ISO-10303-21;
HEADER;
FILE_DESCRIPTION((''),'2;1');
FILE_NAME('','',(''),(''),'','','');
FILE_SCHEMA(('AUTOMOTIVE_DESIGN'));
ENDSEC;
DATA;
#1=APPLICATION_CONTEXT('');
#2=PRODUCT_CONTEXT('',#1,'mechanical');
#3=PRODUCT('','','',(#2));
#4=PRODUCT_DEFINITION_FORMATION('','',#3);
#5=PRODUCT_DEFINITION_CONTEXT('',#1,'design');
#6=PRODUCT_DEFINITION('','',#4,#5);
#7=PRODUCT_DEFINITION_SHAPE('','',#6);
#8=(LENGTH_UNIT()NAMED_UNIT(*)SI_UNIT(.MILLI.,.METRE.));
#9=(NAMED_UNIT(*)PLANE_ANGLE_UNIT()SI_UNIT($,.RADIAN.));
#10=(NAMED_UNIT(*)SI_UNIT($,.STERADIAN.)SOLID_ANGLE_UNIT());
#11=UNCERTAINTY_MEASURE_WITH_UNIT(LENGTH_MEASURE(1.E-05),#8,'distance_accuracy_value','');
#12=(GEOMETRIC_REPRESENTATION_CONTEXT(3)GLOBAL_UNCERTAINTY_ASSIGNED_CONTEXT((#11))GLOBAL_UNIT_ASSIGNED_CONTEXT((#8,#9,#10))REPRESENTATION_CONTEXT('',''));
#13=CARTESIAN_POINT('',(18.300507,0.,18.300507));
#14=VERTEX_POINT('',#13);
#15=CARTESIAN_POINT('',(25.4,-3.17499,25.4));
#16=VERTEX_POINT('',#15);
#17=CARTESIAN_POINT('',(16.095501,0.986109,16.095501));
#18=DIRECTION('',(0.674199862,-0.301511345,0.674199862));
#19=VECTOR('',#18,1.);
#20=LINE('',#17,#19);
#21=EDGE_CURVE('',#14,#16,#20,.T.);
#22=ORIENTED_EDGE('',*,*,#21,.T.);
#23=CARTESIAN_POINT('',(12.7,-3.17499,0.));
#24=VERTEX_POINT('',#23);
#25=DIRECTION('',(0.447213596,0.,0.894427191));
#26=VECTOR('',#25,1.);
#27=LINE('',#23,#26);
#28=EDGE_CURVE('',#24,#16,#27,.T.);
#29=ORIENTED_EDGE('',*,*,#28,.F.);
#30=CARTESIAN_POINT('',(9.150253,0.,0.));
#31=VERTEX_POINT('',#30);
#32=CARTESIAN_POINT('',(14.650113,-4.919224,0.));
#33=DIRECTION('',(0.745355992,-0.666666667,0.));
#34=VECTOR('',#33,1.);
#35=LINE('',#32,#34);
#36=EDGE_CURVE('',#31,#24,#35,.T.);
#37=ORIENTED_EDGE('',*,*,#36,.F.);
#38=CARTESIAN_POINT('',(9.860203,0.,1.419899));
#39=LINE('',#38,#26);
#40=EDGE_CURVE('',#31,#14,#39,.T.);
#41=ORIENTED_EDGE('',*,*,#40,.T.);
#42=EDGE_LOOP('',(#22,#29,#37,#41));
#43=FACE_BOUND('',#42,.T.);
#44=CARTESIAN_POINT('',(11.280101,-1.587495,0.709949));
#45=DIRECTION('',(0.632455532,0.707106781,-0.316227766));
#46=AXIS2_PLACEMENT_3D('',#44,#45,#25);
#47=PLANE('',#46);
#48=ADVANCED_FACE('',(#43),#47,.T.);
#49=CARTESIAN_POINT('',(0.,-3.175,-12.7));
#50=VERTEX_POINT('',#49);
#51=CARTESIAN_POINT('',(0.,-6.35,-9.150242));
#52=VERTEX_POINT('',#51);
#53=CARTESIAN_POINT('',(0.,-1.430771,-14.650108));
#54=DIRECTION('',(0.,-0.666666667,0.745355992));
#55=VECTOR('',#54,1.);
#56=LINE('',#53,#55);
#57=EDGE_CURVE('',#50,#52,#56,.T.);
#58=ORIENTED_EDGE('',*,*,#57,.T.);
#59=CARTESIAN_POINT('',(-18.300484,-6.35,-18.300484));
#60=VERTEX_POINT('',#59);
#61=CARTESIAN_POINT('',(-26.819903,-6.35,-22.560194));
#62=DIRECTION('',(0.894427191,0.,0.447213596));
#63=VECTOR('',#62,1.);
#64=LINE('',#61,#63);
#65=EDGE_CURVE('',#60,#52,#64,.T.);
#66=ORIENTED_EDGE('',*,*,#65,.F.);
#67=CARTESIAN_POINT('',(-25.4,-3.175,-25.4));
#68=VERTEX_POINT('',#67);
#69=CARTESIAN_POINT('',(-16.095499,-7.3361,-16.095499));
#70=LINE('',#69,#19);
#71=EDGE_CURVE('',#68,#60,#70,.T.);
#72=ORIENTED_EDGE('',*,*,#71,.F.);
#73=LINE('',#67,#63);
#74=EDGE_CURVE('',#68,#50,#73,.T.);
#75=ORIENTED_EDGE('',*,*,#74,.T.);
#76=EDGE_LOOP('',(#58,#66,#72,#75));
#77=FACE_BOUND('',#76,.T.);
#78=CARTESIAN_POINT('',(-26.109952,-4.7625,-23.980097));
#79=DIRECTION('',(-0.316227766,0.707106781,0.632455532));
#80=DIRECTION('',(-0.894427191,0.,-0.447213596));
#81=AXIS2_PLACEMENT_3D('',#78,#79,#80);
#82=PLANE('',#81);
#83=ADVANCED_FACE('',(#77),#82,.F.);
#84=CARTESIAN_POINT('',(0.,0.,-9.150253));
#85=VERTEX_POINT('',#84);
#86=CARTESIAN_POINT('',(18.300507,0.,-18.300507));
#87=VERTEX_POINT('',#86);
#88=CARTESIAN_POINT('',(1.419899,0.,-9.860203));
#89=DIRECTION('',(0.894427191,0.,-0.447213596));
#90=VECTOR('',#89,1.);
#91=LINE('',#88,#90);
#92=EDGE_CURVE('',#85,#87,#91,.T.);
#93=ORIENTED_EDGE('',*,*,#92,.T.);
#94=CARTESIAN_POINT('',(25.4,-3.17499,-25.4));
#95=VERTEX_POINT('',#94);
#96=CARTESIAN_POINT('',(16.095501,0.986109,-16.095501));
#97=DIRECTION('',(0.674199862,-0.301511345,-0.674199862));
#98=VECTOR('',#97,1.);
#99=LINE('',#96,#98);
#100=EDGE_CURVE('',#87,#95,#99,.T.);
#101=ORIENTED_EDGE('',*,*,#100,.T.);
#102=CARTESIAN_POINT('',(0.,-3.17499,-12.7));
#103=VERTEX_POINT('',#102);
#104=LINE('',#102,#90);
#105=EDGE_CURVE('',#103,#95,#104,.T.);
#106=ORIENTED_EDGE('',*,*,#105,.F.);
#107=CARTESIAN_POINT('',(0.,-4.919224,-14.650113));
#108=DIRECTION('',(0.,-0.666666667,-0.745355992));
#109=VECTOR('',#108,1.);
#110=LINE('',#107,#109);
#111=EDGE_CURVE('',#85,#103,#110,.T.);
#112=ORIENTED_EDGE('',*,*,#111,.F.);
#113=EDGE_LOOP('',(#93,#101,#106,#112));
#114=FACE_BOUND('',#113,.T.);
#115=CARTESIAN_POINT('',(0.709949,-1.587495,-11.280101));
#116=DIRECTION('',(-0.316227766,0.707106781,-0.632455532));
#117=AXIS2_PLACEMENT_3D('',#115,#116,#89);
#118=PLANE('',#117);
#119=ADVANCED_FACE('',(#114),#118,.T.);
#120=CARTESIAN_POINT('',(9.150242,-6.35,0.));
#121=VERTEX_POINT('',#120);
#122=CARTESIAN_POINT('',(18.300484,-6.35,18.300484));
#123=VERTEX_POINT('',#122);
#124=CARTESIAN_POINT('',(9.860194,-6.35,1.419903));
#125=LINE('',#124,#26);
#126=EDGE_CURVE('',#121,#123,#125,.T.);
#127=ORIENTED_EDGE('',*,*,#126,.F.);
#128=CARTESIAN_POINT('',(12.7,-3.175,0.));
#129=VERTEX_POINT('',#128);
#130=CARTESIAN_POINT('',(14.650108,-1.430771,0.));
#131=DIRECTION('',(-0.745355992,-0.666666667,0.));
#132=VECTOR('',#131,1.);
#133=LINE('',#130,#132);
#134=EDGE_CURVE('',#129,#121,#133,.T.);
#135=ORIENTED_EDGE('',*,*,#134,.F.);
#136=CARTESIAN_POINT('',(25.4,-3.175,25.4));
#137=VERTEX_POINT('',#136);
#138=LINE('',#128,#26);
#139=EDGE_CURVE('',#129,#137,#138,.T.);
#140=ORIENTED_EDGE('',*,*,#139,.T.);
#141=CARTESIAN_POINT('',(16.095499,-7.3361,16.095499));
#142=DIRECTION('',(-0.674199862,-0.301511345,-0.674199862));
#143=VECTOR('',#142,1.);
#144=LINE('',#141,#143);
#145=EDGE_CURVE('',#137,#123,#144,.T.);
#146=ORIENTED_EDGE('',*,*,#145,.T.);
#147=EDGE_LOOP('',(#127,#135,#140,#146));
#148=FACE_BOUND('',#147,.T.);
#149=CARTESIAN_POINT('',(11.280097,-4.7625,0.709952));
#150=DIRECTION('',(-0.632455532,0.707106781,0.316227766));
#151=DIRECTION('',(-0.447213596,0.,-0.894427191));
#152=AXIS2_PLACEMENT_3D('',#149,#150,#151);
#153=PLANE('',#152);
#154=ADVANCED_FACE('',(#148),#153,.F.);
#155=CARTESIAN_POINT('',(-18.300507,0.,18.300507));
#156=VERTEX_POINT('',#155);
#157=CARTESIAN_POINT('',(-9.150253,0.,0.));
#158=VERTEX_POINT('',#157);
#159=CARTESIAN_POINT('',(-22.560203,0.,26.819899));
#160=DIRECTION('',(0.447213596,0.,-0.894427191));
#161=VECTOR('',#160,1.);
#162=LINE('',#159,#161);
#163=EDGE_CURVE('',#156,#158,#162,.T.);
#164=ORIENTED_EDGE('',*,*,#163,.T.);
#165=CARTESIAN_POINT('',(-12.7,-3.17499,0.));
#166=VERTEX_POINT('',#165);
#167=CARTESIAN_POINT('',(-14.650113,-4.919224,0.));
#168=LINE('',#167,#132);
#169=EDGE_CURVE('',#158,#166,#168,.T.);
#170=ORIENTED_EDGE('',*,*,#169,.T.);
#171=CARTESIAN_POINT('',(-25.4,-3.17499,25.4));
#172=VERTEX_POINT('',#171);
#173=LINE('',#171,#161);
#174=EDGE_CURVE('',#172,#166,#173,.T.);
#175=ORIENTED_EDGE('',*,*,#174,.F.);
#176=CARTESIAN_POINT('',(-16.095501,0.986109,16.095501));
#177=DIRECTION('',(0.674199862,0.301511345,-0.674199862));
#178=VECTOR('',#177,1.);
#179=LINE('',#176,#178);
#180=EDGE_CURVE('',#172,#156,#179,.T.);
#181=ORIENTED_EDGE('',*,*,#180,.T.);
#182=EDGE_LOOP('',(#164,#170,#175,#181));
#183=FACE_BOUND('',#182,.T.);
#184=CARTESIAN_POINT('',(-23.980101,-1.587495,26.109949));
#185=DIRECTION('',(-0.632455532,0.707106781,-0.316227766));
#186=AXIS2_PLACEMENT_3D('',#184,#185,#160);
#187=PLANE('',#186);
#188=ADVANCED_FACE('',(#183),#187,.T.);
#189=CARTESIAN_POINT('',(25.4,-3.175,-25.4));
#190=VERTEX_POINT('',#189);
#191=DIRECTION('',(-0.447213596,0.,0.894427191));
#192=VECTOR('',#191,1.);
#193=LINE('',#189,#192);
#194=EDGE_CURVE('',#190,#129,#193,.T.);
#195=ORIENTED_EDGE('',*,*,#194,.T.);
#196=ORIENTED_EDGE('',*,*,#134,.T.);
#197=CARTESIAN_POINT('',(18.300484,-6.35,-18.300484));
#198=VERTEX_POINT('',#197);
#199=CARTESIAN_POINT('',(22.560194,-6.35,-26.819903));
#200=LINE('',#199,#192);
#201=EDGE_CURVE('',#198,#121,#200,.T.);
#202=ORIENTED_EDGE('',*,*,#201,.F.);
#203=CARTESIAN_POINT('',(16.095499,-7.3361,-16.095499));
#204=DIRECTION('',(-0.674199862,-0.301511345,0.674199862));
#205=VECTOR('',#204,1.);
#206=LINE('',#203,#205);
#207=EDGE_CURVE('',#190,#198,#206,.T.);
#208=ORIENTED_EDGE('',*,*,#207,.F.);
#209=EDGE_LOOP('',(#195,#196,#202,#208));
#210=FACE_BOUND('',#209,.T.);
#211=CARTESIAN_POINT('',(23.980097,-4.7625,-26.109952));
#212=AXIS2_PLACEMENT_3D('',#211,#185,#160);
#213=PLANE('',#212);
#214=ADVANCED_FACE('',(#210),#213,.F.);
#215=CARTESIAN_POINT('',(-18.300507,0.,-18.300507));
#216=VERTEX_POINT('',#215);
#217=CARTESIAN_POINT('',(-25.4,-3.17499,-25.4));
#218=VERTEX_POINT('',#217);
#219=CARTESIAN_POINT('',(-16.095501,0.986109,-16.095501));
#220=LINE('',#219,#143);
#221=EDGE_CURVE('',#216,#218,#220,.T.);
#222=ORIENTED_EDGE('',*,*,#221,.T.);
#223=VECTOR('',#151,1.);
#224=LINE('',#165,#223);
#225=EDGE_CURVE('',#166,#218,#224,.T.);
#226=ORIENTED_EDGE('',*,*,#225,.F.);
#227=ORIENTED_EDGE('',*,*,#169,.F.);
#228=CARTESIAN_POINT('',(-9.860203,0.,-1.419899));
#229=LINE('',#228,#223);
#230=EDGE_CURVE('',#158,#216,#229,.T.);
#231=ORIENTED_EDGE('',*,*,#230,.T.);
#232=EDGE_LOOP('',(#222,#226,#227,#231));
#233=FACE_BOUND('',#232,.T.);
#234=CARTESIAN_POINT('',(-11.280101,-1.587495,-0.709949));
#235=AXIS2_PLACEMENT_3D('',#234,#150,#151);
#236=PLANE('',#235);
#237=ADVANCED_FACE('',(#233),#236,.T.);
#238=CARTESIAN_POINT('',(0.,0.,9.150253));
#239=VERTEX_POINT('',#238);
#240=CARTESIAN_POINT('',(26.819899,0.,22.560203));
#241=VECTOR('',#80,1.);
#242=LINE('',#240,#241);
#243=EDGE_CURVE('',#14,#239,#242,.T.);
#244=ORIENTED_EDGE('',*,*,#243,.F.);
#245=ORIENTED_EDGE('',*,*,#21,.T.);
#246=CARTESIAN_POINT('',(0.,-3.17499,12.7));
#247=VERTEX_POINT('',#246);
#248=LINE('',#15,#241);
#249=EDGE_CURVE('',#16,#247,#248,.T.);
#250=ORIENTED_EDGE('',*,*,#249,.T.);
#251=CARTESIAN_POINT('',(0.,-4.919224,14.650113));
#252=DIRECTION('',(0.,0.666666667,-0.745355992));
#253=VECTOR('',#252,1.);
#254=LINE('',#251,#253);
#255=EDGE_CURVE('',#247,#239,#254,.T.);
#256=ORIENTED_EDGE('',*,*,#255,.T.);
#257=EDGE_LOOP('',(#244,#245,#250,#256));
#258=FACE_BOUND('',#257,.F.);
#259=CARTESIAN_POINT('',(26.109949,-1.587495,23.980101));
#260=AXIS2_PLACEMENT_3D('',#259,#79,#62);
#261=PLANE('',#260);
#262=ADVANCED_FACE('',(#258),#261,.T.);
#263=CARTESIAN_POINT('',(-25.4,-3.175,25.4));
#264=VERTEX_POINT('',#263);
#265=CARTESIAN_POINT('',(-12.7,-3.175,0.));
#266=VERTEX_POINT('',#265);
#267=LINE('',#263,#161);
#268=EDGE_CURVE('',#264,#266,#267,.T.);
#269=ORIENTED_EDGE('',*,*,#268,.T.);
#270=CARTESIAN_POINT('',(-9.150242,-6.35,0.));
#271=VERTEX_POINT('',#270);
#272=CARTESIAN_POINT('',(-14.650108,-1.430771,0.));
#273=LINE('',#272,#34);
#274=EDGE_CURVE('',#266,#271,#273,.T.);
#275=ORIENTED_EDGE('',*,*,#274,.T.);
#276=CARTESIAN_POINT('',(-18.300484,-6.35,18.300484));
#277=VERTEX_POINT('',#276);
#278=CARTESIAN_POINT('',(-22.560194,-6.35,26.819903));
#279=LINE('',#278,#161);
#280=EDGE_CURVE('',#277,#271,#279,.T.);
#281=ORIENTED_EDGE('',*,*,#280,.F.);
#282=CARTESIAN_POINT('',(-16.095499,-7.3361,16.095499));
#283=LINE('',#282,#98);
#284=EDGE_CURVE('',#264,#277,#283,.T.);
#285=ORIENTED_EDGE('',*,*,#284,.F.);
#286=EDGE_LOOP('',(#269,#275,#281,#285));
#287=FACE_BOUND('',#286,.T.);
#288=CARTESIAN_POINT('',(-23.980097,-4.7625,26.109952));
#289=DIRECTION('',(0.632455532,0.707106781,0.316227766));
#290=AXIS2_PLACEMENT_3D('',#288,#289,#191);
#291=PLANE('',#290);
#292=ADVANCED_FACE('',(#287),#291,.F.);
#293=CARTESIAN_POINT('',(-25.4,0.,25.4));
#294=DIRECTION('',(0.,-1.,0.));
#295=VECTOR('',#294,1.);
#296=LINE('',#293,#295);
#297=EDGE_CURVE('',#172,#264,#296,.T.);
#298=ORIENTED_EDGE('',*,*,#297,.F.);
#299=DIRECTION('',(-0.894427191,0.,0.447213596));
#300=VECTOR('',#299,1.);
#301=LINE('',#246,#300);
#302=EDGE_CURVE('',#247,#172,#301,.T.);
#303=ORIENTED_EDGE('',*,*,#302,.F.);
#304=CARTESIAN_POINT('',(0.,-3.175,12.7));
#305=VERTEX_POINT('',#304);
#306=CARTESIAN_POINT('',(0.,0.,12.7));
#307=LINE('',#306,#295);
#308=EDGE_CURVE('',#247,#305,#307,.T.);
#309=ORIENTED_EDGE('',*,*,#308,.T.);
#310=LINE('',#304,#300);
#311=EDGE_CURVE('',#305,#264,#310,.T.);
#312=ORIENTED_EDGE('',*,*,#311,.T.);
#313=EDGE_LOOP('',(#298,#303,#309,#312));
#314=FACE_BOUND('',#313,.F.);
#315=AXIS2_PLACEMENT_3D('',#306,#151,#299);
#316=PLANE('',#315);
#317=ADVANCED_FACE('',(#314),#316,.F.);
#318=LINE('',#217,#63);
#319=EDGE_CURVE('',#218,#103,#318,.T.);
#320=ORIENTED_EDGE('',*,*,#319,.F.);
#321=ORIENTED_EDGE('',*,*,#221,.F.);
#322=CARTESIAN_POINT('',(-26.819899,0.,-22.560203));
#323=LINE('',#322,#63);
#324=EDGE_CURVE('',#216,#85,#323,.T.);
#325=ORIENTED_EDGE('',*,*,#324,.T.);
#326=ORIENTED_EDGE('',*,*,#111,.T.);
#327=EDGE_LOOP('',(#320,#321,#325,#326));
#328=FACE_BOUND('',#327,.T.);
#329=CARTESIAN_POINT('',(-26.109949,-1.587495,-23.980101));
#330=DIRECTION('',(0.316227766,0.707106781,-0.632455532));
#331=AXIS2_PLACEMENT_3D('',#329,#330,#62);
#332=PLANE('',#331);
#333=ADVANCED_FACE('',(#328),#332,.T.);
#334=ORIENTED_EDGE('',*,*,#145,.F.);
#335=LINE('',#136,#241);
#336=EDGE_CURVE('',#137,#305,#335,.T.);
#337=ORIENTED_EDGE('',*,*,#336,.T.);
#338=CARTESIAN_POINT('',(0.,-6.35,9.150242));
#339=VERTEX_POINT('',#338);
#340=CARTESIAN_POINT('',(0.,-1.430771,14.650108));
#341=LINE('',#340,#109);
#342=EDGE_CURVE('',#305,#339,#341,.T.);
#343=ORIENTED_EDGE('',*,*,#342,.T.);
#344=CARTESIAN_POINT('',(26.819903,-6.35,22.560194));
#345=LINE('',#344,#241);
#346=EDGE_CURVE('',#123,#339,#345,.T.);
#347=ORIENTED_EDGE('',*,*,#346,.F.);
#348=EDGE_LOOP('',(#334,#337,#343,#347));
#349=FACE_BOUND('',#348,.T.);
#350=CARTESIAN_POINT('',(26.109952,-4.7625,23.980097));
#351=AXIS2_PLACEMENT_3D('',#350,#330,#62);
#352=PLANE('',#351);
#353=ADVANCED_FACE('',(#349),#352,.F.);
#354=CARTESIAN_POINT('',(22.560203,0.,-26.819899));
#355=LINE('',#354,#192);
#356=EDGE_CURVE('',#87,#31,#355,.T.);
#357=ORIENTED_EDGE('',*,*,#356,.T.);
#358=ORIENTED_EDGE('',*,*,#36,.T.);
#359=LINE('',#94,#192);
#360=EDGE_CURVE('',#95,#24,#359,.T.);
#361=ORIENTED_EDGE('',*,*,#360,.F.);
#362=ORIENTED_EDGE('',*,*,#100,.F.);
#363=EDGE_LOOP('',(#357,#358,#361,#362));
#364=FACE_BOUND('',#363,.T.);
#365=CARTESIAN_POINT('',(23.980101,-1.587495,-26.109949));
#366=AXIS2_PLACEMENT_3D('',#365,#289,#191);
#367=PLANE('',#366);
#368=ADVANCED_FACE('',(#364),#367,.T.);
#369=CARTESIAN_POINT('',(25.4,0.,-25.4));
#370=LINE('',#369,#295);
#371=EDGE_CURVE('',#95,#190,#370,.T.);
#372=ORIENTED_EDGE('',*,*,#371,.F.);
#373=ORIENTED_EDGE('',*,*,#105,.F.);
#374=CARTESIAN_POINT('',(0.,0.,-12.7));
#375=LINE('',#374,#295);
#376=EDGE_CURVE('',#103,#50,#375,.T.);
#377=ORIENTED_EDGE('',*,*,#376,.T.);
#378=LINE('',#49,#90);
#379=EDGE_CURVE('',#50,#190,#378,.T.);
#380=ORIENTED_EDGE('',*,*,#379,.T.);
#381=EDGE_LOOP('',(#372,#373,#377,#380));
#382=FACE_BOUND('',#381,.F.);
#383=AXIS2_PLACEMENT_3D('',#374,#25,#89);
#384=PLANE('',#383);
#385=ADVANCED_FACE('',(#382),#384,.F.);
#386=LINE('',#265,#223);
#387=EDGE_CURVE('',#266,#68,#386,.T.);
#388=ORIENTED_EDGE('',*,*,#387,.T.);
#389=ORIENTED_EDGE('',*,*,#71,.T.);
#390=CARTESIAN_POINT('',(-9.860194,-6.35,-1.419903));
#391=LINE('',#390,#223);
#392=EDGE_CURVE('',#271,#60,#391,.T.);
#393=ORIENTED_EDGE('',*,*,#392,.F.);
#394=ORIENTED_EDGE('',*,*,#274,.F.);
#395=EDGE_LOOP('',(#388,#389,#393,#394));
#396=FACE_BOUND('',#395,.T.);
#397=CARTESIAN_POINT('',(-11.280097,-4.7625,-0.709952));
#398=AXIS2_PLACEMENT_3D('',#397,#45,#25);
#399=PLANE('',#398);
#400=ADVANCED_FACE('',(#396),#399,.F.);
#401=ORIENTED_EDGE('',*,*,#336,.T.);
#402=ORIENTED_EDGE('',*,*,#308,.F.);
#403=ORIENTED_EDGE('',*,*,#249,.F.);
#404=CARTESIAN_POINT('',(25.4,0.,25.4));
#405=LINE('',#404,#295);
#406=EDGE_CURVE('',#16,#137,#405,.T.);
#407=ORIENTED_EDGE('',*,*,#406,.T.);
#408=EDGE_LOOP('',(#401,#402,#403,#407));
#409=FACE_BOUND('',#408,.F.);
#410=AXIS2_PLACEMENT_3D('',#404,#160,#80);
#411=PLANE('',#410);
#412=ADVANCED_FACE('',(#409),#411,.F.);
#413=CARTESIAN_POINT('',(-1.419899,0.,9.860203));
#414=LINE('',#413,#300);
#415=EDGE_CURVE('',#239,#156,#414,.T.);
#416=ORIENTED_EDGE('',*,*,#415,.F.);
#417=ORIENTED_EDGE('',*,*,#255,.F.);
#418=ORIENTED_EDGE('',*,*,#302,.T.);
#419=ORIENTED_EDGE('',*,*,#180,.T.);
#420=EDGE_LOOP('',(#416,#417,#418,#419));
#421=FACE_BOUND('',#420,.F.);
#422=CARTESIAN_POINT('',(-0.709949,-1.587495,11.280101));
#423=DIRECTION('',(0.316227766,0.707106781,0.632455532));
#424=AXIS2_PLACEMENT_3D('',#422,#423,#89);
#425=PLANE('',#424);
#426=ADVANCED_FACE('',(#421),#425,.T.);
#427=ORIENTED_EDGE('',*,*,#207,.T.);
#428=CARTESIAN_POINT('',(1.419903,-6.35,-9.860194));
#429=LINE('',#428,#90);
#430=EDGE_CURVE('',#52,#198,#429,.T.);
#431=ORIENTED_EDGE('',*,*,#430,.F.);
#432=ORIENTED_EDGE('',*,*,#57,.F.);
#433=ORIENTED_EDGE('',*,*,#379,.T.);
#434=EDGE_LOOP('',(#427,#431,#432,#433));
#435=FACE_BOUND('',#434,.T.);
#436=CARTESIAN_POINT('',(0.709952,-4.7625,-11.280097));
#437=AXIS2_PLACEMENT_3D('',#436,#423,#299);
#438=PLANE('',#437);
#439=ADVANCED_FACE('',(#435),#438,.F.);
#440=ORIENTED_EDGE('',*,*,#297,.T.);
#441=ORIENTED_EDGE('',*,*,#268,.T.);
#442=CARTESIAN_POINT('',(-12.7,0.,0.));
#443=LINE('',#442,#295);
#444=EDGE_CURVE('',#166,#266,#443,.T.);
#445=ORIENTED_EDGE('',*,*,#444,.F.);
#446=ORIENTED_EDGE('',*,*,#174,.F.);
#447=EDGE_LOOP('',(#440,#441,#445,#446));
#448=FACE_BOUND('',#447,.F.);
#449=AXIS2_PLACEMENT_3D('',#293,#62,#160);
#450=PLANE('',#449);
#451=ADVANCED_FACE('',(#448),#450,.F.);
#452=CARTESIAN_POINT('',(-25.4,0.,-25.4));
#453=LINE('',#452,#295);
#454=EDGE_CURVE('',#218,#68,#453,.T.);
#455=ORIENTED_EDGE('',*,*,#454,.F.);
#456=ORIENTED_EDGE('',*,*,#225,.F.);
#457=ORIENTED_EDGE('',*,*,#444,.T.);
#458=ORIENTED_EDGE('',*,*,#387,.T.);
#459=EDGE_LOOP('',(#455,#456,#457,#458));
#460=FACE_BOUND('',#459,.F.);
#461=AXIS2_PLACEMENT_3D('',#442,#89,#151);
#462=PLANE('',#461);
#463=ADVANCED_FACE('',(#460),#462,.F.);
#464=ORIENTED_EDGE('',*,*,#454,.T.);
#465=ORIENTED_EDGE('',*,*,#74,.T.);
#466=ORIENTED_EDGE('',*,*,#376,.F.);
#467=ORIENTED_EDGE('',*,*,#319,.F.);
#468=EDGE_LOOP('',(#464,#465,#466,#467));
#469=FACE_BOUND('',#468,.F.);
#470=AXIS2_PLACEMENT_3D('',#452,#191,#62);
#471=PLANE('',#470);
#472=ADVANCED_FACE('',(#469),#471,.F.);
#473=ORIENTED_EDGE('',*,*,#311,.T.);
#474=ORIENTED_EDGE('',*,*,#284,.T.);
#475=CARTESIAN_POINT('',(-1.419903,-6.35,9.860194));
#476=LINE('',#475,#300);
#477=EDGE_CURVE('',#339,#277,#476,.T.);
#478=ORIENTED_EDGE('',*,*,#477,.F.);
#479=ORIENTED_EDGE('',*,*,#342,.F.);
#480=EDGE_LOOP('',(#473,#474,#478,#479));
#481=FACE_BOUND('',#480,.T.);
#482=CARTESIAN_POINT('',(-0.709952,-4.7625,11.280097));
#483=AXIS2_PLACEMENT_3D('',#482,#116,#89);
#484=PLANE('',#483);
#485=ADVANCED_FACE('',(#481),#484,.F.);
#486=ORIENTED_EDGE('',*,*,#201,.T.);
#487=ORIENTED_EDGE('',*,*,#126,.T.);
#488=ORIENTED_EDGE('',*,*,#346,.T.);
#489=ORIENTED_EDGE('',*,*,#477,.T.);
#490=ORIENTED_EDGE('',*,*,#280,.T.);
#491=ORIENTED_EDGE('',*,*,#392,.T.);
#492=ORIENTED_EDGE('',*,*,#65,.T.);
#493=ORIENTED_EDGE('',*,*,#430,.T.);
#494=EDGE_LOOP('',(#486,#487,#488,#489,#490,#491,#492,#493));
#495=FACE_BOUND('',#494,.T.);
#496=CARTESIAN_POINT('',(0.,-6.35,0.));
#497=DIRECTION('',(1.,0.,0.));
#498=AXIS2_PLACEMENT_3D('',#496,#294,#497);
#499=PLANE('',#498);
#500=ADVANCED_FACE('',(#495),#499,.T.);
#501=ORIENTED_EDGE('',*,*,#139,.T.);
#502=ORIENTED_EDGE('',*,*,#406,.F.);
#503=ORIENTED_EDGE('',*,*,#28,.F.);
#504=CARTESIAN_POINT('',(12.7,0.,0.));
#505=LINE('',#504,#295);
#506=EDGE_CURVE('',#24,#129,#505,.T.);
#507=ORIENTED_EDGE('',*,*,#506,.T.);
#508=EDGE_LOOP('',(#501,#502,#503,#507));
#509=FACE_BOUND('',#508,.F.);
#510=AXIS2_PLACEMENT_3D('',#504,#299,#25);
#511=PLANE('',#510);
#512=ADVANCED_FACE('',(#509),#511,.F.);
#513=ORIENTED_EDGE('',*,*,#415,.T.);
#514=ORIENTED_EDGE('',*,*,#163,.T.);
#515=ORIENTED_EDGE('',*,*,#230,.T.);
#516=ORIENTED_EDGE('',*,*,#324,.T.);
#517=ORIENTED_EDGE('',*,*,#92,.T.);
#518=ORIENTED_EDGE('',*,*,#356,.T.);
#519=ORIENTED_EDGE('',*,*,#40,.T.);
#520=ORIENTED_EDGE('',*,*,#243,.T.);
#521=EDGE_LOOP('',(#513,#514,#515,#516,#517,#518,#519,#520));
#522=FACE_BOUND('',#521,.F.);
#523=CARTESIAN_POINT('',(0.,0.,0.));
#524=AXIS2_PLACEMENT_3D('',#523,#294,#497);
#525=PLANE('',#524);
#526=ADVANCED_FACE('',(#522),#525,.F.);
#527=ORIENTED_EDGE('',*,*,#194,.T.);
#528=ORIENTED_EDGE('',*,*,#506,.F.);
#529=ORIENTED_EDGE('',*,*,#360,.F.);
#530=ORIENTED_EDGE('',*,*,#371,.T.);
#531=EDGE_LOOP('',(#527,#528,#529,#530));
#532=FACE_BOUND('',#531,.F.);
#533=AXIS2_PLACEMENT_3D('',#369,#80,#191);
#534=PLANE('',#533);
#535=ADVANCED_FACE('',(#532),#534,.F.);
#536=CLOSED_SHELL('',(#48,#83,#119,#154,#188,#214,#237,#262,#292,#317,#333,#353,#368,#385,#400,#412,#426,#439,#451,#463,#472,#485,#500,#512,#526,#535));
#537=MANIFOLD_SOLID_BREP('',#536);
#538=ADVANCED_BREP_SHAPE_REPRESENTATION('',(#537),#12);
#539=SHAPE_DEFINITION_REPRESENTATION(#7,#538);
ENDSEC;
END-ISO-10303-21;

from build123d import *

# Parameters (mm, degrees)
F1_DEPTH = 6.35
F2_SIZE  = 3.175
F3_SIZE  = 3.17499


# Not quite as in the source:
# - a fillet or chamfer is up to 0.001 mm smaller than in the source, because OpenCascade refuses the exact size


with BuildPart() as f1:
    # F0 (on Front) → F1 (new body)
    with BuildSketch(Plane.XZ):
        Polygon((0, 12.7), (-25.4, 25.4), (-12.7, 0), (-25.4, -25.4), (0, -12.7), (25.4, -25.4), (12.7, 0), (25.4, 25.4), align=None)
    extrude(amount=F1_DEPTH)

    # F2
    f2_edges = [f1.edges().sort_by_distance(p)[0] for p in [
        (-19.05, -6.35, 12.7),
        (-12.7, -6.35, 19.05),
        (12.7, -6.35, -19.05),
        (19.05, -6.35, -12.7),
        (19.05, -6.35, 12.7),
        (12.7, -6.35, 19.05),
        (-19.05, -6.35, -12.7),
        (-12.7, -6.35, -19.05),
    ]]
    chamfer(f2_edges, length=F2_SIZE)

    # F3 (size 3.175 in the source; OpenCascade refuses exactly that, so slightly less here)
    f3_edges = [f1.edges().sort_by_distance(p)[0] for p in [
        (-19.05, 0, -12.7),
        (-12.7, 0, -19.05),
        (12.7, 0, -19.05),
        (19.05, 0, -12.7),
        (19.05, 0, 12.7),
        (12.7, 0, 19.05),
        (-12.7, 0, 19.05),
        (-19.05, 0, 12.7),
    ]]
    chamfer(f3_edges, length=F3_SIZE)


solid = f1.part
